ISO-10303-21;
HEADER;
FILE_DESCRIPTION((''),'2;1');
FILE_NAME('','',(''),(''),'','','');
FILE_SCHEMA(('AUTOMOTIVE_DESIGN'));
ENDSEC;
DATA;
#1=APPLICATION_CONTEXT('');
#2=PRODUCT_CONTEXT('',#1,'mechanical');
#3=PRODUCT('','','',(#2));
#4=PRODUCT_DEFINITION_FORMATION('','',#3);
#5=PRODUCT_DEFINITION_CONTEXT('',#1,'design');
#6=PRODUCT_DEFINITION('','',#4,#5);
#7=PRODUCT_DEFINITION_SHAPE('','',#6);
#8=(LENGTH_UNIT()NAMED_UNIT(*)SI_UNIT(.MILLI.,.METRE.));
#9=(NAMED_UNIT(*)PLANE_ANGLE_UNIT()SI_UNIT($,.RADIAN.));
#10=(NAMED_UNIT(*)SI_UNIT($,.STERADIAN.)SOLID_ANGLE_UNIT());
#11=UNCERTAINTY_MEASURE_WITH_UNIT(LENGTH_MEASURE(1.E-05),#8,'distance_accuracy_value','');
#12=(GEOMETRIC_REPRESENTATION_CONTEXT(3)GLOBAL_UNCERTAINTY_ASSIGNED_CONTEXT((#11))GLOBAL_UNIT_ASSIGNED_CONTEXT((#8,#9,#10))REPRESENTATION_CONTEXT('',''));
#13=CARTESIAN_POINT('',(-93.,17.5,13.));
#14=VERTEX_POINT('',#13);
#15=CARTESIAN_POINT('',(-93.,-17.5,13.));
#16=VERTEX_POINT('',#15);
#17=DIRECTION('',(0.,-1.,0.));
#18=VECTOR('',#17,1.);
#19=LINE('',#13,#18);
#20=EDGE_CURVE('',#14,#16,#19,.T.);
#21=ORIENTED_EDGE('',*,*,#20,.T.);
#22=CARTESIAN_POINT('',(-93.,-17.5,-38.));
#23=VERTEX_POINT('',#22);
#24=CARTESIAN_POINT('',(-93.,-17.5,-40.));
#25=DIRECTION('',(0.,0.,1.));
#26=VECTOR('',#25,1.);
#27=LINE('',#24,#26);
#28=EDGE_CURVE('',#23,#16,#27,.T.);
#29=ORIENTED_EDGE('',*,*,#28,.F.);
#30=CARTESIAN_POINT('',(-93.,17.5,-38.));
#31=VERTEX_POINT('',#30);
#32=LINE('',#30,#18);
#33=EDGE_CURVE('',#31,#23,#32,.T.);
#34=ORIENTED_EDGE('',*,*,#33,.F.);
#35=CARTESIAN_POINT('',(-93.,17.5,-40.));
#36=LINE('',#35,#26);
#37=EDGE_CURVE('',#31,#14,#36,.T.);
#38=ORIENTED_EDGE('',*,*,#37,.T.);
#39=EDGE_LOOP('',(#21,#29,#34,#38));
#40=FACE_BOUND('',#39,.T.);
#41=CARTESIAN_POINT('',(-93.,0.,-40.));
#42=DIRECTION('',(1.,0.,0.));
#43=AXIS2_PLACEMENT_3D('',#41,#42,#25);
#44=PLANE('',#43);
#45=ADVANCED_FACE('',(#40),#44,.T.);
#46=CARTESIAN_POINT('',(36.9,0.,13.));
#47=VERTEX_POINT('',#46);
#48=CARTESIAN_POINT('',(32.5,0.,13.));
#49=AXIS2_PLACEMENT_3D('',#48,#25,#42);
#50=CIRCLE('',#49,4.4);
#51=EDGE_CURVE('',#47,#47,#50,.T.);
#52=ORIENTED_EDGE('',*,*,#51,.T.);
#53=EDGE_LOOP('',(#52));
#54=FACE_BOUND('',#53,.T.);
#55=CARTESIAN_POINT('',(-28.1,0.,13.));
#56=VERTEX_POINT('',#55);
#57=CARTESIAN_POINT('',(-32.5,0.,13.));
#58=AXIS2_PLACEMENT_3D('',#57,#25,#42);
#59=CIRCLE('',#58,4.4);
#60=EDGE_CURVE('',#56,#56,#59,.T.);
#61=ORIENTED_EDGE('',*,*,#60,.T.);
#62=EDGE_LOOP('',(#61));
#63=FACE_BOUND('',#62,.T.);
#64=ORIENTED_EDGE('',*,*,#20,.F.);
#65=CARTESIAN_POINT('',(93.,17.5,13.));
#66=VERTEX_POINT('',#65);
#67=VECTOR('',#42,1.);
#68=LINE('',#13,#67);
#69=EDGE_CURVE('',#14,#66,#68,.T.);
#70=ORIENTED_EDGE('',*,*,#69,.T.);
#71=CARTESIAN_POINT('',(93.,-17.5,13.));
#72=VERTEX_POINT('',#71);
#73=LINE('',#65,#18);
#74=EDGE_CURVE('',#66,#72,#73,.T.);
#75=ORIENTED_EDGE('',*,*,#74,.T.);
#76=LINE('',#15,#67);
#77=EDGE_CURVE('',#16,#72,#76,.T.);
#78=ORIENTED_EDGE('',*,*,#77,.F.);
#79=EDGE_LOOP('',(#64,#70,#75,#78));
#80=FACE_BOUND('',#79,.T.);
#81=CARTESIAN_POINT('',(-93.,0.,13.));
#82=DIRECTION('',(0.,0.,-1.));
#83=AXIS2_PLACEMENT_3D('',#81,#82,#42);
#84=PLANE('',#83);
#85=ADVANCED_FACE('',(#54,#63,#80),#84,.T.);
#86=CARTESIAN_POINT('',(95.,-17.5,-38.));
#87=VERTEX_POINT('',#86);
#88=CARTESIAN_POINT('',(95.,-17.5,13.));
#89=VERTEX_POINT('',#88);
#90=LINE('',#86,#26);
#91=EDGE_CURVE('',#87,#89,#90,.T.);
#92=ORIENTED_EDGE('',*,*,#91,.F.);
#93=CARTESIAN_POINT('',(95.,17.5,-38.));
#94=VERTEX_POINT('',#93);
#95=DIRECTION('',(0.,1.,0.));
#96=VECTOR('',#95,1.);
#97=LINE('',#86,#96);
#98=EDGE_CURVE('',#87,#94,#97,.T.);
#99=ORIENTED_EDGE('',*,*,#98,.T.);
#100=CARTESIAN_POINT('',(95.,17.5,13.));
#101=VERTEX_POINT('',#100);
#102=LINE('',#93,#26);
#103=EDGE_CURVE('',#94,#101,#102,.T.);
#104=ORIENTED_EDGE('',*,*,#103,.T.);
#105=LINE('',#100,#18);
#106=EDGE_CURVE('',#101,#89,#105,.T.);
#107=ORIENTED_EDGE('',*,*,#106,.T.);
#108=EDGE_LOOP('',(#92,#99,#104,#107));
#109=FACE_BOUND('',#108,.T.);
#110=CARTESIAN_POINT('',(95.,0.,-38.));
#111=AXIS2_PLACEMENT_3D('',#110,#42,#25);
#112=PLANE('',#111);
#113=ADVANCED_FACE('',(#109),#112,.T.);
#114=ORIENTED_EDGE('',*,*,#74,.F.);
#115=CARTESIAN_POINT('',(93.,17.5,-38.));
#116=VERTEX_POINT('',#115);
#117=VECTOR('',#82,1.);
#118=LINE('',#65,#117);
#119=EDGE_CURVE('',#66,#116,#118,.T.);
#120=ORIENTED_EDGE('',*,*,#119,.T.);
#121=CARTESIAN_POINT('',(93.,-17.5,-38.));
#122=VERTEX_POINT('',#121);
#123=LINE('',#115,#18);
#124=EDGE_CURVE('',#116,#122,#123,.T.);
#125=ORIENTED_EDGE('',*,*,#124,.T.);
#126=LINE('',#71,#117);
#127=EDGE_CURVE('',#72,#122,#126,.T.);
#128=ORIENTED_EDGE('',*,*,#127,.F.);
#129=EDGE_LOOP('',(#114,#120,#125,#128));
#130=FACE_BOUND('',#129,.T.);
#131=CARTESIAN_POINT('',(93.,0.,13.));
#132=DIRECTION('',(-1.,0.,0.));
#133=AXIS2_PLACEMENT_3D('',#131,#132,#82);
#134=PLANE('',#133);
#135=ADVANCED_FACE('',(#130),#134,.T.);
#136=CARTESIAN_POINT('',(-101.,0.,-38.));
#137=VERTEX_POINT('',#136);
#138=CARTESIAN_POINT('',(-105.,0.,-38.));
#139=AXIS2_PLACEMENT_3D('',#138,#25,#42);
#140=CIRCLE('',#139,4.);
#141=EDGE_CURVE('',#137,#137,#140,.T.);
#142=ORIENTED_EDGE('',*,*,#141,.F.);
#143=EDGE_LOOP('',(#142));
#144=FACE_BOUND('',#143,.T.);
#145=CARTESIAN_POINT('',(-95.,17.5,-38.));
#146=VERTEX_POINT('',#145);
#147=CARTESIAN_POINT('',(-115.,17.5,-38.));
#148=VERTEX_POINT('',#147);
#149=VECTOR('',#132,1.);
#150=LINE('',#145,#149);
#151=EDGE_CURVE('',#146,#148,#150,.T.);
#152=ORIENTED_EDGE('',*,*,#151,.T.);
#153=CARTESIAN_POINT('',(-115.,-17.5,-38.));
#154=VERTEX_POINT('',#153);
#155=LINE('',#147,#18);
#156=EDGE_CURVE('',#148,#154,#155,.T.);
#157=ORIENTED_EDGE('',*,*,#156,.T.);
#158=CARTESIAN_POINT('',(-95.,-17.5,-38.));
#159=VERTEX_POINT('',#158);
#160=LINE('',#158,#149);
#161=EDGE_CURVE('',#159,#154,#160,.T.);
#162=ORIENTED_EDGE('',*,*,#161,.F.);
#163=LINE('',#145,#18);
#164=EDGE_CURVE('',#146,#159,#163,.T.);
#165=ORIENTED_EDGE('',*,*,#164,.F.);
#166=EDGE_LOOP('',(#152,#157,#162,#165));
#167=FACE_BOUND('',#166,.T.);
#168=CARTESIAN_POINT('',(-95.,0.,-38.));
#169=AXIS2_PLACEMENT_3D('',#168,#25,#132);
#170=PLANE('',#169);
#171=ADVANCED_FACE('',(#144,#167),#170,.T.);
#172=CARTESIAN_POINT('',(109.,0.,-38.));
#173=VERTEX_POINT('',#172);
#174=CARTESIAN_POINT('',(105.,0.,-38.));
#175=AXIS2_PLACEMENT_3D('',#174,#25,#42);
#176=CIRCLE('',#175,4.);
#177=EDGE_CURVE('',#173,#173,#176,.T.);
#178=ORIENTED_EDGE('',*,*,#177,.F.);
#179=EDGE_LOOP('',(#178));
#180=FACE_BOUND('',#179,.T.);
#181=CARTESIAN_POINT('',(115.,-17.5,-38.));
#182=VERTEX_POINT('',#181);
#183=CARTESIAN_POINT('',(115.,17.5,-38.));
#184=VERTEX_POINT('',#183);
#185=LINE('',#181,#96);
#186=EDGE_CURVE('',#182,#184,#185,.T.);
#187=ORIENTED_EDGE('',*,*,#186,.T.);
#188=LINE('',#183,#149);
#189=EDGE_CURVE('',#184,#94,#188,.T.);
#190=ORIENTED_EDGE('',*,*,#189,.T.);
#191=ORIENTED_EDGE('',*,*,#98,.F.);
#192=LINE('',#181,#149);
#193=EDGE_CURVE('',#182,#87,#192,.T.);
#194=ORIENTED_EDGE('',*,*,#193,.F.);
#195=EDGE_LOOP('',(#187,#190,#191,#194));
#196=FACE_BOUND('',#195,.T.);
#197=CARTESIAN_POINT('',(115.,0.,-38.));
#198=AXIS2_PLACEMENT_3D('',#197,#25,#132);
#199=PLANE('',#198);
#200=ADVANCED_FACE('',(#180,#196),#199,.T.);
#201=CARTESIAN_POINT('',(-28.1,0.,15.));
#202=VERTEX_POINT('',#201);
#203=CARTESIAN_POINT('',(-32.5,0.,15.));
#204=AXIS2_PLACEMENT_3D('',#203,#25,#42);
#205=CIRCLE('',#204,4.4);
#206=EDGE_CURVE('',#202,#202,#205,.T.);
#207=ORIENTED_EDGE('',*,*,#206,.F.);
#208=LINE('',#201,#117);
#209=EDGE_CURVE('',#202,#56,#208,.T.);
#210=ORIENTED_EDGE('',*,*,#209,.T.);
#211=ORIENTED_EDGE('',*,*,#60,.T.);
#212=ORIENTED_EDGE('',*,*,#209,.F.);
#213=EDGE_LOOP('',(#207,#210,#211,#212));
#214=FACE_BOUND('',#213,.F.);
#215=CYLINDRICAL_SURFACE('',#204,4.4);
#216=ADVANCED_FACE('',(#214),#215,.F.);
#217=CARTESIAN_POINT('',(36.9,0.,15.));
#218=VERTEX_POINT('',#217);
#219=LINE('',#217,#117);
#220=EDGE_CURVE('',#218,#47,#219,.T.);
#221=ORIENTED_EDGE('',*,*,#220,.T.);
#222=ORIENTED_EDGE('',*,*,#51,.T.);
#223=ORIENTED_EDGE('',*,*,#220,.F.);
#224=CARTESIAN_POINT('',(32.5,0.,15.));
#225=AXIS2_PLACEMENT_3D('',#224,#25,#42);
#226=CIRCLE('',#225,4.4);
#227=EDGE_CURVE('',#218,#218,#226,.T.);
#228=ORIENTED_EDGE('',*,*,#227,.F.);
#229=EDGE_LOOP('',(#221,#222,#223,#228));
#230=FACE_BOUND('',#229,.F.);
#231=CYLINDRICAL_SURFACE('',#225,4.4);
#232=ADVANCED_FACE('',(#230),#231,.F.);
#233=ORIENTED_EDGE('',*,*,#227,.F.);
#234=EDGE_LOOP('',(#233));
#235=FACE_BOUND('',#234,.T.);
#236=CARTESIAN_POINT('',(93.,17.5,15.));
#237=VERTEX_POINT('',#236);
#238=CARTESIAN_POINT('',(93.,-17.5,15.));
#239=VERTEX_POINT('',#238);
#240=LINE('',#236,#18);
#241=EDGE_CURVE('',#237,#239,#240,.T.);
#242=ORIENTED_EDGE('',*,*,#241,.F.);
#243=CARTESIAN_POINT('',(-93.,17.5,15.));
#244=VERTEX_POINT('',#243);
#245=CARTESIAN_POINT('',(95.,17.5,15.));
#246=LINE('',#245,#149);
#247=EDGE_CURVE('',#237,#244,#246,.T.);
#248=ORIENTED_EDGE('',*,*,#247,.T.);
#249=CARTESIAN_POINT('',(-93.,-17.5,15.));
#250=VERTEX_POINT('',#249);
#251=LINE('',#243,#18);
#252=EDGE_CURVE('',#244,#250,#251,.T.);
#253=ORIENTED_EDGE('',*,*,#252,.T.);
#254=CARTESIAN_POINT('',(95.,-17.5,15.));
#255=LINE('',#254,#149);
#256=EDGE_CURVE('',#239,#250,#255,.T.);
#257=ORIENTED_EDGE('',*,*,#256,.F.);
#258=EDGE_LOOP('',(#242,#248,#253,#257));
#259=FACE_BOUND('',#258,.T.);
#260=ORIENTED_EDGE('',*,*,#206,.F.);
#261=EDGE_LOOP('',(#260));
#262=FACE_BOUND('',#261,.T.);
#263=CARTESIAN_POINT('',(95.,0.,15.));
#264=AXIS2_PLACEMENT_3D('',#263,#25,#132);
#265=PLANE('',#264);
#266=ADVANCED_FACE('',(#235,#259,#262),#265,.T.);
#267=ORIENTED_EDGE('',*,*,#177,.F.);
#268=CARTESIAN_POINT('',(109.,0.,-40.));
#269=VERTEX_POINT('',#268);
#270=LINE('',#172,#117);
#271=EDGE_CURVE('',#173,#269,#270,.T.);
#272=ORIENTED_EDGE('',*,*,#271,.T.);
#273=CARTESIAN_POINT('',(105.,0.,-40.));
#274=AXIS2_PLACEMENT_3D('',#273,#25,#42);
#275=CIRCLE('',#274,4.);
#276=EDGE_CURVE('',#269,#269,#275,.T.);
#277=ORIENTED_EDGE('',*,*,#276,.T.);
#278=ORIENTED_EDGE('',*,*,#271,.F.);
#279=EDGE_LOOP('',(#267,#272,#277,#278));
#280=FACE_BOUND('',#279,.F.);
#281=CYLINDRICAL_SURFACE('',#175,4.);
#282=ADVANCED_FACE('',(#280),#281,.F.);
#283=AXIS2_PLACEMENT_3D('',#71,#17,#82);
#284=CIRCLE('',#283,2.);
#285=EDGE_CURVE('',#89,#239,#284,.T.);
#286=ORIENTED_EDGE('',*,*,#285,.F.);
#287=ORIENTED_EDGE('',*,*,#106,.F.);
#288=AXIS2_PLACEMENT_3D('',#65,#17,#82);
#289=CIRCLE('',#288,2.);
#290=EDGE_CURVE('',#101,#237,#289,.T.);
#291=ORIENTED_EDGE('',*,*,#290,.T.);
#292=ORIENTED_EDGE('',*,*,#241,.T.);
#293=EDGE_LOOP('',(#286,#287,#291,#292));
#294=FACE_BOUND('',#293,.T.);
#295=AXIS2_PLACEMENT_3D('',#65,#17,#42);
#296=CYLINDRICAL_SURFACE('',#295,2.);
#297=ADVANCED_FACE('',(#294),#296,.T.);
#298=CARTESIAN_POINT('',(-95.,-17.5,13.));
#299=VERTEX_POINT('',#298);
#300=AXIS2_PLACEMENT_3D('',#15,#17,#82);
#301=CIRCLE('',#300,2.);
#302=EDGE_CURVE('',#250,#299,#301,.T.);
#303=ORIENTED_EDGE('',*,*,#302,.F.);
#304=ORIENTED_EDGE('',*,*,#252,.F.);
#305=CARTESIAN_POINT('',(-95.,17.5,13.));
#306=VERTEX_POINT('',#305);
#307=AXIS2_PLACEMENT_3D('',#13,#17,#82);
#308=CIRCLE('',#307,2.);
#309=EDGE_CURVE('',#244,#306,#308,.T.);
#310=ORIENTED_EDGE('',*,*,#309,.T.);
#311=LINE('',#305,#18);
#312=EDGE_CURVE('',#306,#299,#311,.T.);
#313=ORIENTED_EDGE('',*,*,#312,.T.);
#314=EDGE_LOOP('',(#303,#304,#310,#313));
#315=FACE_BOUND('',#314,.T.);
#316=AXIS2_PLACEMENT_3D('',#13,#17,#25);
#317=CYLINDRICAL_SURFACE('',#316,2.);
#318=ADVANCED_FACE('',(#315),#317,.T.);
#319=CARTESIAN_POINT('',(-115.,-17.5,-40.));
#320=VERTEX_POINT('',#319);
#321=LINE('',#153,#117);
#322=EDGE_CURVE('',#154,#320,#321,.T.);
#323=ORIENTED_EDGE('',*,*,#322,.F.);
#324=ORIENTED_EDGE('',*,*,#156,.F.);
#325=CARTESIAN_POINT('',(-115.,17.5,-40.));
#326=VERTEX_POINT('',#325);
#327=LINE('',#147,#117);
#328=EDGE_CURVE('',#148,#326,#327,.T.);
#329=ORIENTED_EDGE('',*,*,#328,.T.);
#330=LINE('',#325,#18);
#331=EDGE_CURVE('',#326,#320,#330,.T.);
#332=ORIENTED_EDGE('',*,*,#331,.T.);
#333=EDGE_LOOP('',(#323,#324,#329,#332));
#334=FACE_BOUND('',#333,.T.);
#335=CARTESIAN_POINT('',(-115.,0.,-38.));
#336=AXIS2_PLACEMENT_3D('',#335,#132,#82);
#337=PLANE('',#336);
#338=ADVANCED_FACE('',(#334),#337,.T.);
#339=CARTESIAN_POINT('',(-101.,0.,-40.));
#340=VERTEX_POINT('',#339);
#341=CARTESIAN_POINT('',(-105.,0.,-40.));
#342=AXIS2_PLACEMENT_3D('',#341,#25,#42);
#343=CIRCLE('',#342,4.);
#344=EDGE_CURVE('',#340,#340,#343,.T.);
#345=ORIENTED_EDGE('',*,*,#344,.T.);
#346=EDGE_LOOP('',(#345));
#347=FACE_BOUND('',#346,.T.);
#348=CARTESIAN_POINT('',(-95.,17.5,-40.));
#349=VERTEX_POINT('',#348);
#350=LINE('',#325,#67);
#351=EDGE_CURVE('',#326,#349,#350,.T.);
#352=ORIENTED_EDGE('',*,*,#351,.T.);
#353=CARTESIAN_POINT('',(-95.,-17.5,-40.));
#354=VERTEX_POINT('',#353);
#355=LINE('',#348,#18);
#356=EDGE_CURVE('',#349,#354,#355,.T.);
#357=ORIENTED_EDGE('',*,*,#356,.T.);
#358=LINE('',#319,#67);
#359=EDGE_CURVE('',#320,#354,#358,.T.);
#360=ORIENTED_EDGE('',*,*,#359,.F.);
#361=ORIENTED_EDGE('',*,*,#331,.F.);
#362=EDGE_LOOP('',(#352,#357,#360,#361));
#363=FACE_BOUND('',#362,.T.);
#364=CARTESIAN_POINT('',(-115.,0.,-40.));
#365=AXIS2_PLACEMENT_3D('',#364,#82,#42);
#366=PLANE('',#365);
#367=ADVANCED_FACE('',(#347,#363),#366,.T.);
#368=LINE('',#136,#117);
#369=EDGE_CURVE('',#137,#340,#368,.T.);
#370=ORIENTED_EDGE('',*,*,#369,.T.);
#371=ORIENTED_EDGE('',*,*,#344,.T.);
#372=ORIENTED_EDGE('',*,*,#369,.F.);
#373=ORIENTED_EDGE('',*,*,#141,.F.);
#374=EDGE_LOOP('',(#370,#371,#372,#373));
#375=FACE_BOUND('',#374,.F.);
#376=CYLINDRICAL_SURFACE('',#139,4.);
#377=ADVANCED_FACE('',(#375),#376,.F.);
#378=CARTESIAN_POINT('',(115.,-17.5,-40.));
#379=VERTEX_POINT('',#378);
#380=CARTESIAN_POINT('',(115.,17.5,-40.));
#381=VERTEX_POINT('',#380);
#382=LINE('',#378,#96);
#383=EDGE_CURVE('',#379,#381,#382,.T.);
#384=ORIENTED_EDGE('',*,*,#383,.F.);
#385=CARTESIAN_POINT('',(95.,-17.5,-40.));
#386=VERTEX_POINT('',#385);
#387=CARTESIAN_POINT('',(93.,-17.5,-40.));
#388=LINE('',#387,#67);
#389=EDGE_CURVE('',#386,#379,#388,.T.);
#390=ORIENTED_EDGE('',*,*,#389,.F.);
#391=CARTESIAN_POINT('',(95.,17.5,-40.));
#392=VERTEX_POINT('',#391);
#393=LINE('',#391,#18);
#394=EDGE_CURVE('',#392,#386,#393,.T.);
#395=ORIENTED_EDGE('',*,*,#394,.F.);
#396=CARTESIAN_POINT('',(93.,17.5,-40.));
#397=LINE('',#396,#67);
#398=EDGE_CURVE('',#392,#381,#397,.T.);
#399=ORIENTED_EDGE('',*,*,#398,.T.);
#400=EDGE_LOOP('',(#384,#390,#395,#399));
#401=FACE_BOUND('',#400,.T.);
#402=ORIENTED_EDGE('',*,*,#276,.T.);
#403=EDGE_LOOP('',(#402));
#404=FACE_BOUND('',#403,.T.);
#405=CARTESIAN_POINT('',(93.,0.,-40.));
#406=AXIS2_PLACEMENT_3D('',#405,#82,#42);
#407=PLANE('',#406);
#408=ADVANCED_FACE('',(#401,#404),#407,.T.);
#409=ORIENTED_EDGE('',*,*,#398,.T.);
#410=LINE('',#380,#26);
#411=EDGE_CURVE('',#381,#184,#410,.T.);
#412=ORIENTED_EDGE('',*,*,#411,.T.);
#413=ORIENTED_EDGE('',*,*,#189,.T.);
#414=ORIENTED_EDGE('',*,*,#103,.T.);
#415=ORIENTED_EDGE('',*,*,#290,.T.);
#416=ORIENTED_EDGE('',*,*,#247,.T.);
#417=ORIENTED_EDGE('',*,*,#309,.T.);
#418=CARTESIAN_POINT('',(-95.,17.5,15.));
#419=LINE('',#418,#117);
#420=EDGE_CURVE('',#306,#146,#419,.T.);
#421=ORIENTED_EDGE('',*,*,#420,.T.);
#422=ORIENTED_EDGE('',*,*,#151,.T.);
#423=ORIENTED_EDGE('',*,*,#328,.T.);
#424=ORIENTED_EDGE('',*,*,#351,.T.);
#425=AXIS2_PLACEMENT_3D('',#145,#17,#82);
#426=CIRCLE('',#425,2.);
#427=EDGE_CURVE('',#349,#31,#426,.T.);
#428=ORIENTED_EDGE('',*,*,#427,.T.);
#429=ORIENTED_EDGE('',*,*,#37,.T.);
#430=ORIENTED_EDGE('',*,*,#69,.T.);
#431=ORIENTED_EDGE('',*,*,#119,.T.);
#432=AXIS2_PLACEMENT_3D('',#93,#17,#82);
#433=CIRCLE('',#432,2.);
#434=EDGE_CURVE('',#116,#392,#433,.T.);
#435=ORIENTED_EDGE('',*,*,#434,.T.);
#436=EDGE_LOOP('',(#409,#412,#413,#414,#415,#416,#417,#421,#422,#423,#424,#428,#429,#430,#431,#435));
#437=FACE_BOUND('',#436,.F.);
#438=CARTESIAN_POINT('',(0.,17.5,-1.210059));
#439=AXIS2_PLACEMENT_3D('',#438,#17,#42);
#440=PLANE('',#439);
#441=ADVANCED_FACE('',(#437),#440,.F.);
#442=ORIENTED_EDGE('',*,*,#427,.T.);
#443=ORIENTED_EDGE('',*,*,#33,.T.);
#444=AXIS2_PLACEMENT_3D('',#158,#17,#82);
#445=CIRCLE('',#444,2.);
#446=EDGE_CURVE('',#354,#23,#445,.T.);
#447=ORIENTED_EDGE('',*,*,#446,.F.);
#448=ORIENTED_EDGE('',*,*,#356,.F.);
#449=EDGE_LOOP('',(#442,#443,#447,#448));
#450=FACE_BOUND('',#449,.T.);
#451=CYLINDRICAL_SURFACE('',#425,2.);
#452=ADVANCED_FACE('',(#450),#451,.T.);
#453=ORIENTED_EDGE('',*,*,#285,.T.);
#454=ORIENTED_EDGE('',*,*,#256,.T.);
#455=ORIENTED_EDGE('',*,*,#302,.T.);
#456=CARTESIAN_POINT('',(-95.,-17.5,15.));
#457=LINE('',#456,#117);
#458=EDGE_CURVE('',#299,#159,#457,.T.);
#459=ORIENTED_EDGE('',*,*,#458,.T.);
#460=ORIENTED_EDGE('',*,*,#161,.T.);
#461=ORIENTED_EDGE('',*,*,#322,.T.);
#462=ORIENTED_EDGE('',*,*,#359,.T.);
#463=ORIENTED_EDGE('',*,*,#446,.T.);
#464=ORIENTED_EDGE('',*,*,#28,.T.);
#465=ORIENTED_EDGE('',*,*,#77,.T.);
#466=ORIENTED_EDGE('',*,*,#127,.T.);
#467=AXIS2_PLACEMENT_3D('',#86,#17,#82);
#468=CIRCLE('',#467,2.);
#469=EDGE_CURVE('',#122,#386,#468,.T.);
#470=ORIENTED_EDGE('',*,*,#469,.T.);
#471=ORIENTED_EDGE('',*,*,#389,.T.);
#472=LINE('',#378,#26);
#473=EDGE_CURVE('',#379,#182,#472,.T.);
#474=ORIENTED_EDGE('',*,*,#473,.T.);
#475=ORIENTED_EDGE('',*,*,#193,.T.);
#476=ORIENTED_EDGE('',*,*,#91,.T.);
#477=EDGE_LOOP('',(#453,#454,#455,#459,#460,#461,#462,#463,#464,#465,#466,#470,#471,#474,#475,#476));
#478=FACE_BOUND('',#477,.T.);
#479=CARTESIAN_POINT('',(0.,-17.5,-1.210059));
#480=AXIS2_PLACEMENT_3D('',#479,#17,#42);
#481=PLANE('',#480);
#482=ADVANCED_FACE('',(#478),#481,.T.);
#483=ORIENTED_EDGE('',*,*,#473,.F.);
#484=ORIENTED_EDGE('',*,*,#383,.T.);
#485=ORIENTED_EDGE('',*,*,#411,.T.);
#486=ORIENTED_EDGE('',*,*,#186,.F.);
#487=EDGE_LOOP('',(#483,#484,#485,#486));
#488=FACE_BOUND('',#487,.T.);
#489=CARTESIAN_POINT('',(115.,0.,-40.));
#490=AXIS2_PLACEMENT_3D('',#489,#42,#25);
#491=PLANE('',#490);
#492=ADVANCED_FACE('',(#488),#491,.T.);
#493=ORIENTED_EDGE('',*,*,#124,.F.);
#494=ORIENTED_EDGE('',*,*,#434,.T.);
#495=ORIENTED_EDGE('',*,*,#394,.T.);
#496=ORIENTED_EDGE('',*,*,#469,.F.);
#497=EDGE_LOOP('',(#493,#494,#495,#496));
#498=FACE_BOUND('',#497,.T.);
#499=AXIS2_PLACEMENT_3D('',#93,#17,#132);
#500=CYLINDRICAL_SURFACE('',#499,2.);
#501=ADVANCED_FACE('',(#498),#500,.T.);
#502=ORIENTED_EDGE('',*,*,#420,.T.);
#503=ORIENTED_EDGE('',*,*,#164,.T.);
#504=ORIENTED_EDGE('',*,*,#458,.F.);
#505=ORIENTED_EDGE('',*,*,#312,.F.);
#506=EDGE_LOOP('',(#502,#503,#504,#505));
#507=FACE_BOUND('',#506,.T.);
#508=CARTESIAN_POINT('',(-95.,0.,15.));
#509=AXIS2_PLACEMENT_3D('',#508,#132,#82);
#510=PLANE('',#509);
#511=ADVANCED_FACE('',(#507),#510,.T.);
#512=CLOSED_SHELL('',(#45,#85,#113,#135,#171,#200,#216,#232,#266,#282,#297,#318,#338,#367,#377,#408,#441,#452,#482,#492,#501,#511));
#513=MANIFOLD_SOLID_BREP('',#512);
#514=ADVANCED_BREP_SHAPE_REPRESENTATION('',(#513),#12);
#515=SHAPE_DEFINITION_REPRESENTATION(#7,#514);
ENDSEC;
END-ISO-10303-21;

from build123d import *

# Parameters (mm, degrees)
F1_DEPTH = 17.5
F2_R     = 4
F3_DEPTH = 25
F4_R     = 4.4
F5_DEPTH = 25
F6_R     = 2


# Not quite as in the source:
# - a feature names something its author has since deleted; it is built from what else it names


with BuildPart() as f1:
    # F0 (on Front) → F1 (new body, symmetric)
    with BuildSketch(Plane.XZ):
        Polygon((95, -38), (95, 15), (-95, 15), (-95, -38), (-115, -38), (-115, -40), (-93, -40), (-93, 13), (93, 13), (93, -40), (115, -40), (115, -38), align=None)
    extrude(amount=F1_DEPTH, both=True)

    # F2 (on face) → F3 (cut)
    with BuildSketch(Plane.XY.offset(-38)):
        with Locations((-105, 0)):
            Circle(F2_R)
        with Locations((105, 0)):
            Circle(F2_R)
    extrude(amount=-F3_DEPTH, mode=Mode.SUBTRACT)

    # F4 (on face) → F5 (cut)
    with BuildSketch(Plane.XY.offset(15)):
        with Locations((-32.5, 0)):
            Circle(F4_R)
        with Locations((32.5, 0)):
            Circle(F4_R)
    extrude(amount=-F5_DEPTH, mode=Mode.SUBTRACT)

    # F6
    f6_edges = [f1.edges().sort_by_distance(p)[0] for p in [
        (95, 0, 15),
        (-95, 0, 15),
        (-93, 0, -40),
        (93, 0, -40),
    ]]
    fillet(f6_edges, radius=F6_R)


solid = f1.part
